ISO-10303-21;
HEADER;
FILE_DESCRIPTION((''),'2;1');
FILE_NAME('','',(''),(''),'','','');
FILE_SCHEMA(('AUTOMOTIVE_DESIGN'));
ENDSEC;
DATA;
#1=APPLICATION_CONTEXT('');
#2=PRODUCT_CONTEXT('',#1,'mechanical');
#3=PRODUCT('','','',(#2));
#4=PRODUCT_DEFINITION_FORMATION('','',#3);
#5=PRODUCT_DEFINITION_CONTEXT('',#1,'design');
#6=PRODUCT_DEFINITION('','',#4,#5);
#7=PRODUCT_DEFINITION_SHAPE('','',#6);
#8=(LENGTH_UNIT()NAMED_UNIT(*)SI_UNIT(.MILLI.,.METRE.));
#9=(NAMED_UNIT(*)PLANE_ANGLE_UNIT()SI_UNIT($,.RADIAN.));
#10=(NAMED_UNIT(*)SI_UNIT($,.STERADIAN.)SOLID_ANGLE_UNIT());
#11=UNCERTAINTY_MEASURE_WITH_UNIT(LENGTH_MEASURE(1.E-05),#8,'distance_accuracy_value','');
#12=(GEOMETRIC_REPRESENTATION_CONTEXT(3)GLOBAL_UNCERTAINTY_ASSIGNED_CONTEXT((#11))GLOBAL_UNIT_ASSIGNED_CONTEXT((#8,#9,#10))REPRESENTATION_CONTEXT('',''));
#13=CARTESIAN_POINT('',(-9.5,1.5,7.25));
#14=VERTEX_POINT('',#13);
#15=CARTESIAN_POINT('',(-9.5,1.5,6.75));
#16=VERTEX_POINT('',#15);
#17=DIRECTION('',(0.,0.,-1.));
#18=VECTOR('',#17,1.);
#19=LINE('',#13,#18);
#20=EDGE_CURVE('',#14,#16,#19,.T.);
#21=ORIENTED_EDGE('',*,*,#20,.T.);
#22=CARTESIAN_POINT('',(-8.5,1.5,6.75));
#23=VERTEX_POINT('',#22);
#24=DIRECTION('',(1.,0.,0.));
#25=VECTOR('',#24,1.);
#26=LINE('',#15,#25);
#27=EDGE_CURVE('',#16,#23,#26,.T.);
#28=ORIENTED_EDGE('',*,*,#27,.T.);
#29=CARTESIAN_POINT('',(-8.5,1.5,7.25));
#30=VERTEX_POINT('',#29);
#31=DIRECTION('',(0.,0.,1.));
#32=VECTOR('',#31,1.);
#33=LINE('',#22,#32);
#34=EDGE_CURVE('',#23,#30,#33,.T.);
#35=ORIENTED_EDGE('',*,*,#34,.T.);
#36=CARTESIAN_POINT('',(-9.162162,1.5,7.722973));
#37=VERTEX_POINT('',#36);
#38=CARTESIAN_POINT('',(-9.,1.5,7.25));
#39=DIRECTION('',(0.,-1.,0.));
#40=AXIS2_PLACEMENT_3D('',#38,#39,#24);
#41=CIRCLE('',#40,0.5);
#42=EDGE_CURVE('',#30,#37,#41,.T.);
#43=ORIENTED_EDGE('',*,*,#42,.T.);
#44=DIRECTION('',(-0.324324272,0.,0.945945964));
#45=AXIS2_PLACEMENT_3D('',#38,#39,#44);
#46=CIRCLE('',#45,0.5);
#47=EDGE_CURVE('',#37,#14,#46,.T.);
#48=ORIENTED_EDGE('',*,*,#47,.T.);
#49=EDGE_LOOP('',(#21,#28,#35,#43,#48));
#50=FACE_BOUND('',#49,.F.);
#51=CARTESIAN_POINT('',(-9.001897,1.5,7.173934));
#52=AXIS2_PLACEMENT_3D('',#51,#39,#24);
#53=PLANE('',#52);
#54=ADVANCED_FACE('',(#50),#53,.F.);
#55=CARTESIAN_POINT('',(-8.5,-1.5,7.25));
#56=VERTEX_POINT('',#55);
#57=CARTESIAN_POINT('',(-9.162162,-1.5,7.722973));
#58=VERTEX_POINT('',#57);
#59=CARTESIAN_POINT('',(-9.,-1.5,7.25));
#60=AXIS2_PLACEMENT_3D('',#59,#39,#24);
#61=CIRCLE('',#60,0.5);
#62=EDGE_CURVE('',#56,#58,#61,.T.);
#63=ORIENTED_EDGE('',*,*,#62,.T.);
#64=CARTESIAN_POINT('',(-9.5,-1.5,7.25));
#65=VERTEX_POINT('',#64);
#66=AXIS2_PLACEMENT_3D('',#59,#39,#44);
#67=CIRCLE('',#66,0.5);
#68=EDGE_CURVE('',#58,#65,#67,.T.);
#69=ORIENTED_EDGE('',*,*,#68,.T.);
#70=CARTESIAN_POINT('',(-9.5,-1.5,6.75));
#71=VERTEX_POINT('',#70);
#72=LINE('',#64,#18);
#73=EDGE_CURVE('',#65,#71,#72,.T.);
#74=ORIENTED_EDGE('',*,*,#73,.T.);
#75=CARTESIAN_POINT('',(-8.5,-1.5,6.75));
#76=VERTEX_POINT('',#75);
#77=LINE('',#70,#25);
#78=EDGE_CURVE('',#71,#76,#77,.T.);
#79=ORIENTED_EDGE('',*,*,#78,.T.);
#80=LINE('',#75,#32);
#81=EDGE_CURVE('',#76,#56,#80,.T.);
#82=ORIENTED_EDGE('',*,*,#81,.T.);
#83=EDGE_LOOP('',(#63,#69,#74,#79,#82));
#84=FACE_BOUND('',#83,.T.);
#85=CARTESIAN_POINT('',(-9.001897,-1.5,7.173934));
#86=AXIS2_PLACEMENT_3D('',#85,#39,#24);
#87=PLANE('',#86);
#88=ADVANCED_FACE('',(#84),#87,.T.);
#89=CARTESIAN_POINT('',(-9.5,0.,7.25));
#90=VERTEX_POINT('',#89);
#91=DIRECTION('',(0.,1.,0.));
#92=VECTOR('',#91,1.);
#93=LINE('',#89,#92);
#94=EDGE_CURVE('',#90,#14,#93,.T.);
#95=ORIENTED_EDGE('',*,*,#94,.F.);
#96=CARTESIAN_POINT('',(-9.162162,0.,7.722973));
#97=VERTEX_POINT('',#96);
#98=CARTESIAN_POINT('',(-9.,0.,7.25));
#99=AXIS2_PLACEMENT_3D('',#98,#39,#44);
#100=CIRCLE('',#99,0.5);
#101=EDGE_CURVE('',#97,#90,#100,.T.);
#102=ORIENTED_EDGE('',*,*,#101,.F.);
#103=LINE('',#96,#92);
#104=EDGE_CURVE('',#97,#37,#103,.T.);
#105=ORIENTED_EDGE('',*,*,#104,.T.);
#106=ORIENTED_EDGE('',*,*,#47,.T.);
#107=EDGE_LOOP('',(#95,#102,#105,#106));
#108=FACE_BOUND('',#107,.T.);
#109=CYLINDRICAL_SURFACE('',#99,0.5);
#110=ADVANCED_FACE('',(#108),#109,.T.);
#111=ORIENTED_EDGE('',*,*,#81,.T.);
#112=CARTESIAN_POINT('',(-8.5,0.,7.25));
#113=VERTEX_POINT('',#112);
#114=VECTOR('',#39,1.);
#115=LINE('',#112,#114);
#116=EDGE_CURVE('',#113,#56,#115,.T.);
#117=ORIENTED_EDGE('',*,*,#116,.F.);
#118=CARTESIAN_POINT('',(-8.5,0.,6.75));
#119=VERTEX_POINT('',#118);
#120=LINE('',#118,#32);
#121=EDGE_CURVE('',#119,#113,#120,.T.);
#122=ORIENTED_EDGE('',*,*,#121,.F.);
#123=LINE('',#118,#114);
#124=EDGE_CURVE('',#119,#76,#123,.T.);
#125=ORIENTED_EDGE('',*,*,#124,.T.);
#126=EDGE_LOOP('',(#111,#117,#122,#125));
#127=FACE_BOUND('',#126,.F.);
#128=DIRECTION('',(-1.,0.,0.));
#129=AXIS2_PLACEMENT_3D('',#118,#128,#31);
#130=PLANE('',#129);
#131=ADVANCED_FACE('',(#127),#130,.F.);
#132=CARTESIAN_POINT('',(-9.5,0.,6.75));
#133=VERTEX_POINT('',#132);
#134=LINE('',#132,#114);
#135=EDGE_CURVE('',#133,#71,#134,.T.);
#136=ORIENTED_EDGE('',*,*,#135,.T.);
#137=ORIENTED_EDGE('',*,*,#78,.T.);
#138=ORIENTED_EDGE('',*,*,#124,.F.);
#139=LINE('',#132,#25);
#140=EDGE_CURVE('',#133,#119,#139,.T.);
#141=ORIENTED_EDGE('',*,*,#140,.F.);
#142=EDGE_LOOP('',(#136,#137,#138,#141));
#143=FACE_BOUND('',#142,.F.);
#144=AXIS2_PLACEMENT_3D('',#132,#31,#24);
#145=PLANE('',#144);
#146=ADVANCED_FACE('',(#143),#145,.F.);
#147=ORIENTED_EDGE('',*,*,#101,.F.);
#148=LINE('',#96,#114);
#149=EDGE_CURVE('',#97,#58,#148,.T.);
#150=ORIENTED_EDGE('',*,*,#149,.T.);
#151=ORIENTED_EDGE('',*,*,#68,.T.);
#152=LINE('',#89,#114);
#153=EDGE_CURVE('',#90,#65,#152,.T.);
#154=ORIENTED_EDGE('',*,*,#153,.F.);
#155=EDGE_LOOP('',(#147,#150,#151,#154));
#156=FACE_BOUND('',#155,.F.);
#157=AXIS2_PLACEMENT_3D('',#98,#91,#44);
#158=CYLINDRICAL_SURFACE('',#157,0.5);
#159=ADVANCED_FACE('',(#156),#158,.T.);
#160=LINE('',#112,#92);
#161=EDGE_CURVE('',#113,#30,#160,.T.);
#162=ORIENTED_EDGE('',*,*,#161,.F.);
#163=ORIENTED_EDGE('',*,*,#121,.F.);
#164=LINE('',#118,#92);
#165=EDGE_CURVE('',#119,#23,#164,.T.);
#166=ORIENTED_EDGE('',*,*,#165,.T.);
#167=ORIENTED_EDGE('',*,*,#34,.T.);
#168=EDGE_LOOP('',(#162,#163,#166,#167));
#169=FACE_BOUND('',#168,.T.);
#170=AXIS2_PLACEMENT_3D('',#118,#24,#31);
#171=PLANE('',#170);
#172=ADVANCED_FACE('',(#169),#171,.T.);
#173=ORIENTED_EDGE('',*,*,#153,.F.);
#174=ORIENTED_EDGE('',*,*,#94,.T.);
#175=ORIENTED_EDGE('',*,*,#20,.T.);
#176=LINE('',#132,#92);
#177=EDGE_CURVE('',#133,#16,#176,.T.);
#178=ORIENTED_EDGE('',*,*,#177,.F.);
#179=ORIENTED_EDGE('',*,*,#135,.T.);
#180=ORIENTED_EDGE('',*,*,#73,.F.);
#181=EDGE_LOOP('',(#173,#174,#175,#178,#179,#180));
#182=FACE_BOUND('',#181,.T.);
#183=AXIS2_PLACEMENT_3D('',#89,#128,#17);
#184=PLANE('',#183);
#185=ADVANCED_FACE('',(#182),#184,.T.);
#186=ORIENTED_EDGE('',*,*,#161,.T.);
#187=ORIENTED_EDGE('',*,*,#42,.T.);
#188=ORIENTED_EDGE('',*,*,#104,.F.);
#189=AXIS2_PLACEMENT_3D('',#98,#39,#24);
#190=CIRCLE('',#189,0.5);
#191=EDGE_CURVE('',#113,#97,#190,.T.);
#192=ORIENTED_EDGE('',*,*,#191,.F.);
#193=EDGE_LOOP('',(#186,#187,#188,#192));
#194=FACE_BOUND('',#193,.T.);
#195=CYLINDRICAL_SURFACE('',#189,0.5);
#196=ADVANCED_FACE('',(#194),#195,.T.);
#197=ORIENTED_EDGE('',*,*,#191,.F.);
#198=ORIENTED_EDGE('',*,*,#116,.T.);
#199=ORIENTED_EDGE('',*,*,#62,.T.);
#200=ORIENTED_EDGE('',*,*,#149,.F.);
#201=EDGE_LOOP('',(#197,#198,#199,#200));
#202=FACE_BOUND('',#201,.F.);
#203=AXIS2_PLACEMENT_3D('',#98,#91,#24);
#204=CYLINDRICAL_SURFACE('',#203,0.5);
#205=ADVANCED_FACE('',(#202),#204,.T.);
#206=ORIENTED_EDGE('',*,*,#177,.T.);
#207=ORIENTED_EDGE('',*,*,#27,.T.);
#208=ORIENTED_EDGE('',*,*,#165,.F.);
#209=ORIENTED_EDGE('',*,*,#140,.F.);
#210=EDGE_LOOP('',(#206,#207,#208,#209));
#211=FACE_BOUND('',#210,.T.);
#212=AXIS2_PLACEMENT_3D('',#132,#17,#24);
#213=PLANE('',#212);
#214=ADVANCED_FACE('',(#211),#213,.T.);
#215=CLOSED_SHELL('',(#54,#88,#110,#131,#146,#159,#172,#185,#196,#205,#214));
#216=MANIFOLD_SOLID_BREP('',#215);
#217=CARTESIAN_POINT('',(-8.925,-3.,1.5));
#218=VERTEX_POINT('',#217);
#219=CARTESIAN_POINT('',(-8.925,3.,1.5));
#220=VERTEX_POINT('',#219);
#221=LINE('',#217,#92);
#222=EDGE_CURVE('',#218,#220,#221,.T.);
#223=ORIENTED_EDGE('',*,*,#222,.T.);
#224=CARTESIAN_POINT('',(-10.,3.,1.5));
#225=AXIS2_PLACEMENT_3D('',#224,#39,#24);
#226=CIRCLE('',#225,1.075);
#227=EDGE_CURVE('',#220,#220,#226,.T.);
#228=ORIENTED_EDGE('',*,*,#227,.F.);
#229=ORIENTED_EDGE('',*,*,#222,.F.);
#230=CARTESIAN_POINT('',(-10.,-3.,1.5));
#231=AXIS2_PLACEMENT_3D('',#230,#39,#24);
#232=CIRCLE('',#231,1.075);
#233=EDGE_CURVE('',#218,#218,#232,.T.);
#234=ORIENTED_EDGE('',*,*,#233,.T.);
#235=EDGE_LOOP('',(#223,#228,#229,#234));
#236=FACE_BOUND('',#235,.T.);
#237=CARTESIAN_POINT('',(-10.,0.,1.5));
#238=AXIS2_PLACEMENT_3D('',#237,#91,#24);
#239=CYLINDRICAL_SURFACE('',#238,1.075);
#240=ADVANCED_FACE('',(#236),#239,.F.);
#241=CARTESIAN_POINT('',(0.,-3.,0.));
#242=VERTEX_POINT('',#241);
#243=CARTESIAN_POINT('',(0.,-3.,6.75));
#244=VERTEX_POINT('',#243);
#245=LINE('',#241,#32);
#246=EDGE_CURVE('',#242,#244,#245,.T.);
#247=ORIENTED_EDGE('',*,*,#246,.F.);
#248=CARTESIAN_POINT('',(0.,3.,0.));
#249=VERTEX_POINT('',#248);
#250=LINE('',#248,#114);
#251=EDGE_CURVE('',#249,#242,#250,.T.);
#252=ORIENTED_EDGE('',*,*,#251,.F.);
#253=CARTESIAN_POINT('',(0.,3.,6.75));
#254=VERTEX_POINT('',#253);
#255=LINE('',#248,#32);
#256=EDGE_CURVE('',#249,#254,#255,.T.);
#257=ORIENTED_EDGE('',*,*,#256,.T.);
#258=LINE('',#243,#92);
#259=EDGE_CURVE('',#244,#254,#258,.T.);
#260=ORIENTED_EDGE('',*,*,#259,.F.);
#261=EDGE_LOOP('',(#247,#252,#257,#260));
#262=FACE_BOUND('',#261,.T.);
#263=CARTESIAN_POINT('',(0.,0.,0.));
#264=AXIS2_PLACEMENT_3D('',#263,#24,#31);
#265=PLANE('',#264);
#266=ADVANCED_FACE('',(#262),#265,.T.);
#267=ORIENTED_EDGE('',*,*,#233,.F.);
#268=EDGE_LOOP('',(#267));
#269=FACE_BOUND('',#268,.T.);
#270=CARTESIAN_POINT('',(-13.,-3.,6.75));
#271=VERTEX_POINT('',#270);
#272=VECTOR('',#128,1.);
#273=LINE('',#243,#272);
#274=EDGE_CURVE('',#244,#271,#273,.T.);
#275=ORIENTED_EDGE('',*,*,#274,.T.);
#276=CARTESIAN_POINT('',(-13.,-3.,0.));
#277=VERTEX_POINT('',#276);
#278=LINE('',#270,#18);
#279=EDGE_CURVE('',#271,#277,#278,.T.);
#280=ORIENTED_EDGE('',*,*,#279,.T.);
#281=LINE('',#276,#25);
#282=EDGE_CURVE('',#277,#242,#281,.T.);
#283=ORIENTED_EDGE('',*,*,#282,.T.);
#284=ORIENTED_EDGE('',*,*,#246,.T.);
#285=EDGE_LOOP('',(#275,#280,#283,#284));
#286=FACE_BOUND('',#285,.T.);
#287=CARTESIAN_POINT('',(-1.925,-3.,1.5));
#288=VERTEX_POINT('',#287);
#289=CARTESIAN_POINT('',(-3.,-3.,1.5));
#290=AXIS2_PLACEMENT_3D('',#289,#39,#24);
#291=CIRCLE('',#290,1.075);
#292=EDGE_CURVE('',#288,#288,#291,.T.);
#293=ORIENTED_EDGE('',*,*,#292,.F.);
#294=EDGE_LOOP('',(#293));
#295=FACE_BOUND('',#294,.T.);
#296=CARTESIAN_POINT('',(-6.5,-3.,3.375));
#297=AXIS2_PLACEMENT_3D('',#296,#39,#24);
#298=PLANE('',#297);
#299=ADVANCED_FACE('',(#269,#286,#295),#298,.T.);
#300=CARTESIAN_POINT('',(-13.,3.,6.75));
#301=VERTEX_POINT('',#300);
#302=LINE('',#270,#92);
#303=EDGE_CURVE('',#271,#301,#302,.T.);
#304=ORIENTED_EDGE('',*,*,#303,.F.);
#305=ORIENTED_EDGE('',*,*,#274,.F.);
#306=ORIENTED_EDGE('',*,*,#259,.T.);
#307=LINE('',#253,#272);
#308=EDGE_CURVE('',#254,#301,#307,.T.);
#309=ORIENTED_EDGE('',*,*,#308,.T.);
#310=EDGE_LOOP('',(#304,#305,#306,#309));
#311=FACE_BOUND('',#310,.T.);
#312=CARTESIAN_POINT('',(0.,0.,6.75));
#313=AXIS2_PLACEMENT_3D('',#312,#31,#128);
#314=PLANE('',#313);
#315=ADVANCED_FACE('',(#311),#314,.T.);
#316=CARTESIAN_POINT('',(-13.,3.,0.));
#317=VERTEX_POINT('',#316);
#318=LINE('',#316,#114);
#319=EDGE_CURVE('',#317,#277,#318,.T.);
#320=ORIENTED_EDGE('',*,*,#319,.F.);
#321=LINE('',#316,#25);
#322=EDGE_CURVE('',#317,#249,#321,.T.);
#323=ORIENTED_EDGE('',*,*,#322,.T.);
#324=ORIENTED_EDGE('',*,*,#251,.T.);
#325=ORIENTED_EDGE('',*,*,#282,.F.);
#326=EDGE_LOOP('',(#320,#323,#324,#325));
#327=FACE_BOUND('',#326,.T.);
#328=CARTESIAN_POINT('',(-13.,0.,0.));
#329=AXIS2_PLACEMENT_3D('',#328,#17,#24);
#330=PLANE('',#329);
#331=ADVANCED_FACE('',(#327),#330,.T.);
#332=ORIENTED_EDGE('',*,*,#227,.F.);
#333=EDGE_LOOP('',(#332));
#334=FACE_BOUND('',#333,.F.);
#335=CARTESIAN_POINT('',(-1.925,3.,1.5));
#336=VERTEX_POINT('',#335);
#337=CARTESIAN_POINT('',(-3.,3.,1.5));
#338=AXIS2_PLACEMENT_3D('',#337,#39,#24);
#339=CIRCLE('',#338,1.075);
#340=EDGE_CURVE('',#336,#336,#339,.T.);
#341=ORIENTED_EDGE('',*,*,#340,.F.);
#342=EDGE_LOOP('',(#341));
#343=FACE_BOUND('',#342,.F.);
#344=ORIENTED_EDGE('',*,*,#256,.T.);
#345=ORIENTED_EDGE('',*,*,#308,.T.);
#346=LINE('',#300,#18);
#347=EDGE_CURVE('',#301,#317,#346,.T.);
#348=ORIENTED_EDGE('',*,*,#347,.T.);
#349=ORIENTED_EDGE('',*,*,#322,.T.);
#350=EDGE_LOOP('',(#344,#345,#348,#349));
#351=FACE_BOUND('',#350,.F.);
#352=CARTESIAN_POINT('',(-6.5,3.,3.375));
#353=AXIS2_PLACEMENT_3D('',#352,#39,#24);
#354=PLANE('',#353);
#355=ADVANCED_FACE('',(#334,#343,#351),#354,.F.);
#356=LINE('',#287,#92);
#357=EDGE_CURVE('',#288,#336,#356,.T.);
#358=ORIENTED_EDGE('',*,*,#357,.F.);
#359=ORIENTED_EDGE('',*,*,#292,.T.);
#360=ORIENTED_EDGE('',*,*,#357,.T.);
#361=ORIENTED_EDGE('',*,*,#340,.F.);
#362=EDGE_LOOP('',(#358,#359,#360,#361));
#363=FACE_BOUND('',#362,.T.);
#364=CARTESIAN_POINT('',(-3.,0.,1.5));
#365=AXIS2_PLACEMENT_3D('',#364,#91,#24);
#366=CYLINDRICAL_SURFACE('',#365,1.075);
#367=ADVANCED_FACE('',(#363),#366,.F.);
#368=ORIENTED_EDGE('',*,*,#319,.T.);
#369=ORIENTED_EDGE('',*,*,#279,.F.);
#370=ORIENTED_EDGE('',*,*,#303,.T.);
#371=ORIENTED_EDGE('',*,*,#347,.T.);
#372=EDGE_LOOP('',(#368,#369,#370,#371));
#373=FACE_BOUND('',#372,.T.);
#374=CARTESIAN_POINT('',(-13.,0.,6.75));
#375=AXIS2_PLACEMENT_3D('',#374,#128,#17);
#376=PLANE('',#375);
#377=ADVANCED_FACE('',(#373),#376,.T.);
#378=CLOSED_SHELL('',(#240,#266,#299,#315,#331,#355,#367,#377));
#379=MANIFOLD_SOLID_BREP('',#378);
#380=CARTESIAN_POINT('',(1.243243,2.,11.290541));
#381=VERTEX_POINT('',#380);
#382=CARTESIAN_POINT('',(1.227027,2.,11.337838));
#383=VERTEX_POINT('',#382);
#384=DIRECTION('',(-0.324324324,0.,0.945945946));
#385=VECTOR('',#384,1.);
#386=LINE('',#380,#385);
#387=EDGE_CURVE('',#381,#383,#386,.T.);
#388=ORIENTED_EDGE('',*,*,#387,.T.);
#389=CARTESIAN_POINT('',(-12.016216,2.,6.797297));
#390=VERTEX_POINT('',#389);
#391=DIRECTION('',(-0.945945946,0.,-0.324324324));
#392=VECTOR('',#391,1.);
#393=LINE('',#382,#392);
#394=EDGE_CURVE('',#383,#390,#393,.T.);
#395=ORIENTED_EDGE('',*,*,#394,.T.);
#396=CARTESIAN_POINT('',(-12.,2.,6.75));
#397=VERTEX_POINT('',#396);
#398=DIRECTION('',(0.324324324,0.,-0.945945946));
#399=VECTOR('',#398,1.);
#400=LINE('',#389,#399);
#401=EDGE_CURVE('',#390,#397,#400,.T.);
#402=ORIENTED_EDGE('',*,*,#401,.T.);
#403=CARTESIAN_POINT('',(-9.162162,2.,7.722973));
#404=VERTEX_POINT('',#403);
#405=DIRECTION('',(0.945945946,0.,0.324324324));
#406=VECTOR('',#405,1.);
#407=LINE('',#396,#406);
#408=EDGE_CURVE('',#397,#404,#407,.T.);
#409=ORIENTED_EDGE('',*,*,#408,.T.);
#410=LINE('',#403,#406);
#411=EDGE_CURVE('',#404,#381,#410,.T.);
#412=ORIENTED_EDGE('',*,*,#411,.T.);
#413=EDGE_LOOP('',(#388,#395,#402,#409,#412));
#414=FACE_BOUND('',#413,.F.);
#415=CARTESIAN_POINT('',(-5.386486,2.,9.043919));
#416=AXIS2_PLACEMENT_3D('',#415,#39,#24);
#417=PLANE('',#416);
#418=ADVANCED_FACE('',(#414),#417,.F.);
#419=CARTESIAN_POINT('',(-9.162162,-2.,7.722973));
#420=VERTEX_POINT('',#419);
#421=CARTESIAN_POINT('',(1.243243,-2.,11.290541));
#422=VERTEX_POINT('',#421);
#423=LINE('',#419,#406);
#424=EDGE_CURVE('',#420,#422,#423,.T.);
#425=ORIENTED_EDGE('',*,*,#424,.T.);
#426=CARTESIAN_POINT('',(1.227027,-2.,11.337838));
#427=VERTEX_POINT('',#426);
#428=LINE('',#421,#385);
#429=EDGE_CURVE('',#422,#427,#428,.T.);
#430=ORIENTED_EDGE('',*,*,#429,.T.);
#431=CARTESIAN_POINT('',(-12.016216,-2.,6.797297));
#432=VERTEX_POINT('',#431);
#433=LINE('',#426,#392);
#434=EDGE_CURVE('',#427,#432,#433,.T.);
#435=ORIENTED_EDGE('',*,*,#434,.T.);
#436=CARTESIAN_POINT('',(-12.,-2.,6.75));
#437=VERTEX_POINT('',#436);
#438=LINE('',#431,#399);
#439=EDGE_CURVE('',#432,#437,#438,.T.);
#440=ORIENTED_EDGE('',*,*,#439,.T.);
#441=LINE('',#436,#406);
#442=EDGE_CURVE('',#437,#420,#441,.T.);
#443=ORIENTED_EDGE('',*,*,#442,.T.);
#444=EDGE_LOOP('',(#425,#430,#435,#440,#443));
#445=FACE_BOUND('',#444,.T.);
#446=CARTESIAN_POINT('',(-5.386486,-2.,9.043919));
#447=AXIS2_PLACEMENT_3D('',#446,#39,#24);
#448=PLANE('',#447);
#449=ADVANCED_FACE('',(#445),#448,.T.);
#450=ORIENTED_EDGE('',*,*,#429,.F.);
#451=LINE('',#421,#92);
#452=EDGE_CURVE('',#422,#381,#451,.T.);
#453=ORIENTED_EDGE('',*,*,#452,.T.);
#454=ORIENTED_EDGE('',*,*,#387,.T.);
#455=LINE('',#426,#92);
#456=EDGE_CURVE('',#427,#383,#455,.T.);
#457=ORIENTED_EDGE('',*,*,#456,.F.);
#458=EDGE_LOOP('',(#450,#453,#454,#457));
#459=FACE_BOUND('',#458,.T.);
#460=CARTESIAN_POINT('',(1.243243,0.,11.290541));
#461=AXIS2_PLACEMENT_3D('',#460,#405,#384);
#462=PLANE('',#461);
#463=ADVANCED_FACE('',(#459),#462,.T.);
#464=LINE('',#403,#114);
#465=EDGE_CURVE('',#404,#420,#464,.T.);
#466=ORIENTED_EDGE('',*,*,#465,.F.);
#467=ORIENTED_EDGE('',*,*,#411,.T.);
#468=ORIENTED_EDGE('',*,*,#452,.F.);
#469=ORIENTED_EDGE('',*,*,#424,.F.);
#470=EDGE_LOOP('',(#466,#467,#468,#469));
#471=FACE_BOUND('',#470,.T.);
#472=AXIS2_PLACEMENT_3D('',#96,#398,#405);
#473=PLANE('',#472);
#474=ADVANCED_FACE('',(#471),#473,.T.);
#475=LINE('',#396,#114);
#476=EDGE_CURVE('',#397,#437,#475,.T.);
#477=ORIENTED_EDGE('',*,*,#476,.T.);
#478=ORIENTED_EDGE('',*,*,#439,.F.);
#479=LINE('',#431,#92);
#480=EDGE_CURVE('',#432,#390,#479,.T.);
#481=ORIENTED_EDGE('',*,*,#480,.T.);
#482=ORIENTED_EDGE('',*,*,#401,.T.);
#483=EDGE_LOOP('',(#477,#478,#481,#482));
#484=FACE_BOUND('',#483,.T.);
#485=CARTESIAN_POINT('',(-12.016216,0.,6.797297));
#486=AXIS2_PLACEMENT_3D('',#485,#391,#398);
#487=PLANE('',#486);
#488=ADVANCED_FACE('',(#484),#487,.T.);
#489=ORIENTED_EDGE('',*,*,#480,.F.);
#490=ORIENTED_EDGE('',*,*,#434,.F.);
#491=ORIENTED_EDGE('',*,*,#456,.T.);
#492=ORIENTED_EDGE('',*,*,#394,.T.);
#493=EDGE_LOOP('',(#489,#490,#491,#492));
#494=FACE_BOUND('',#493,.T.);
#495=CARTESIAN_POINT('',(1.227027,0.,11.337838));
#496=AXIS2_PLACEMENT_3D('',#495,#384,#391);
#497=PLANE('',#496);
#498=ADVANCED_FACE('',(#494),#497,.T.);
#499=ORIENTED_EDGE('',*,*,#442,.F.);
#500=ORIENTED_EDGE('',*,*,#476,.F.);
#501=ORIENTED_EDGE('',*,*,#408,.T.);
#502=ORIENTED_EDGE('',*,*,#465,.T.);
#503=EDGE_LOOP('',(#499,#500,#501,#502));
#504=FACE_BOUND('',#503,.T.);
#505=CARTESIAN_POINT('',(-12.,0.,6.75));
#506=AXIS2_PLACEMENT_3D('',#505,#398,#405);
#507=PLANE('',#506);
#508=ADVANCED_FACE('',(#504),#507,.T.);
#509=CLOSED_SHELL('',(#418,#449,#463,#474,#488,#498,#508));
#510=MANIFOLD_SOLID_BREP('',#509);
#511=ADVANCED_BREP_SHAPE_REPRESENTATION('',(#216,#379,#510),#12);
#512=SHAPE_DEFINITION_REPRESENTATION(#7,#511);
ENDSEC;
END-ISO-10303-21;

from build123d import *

# Parameters (mm, degrees)
F0_R     = 1.075
F1_DEPTH = 3
F2_DEPTH = 1.5
F3_DEPTH = 2


with BuildPart() as f1:
    # F0 (on Front) → F1 (new body, symmetric)
    with BuildSketch(Plane.XZ):
        Polygon((-12, 6.75), (-13, 6.75), (-13, 0), (0, 0), (0, 6.75), (-8.5, 6.75), (-9.5, 6.75), align=None)
        with Locations((-10, 1.5)):
            Circle(F0_R, mode=Mode.SUBTRACT)
        with Locations((-3, 1.5)):
            Circle(F0_R, mode=Mode.SUBTRACT)
    extrude(amount=F1_DEPTH, both=True)


with BuildPart() as f2:
    # F0 (on Front) → F2 (new body, symmetric)
    with BuildSketch(Plane.XZ):
        with BuildLine():
            Line((-9.5, 7.25), (-9.5, 6.75))
            Line((-9.5, 6.75), (-8.5, 6.75))
            Line((-8.5, 6.75), (-8.5, 7.25))
            ThreePointArc((-8.5, 7.25), (-8.7093808918, 7.6568667275), (-9.1621621359, 7.722972982))
            ThreePointArc((-9.1621621359, 7.722972982), (-9.4068667275, 7.5406191082), (-9.5, 7.25))
        make_face()
    extrude(amount=F2_DEPTH, both=True)


with BuildPart() as f3:
    # F0 (on Front) → F3 (new body, symmetric)
    with BuildSketch(Plane.XZ):
        Polygon((-12.0162162162, 6.7972972973), (-12, 6.75), (-9.1621621359, 7.722972982), (1.2432432432, 11.2905405405), (1.227027027, 11.3378378378), align=None)
    extrude(amount=F3_DEPTH, both=True)


solid = Compound([f1.part, f2.part, f3.part])
